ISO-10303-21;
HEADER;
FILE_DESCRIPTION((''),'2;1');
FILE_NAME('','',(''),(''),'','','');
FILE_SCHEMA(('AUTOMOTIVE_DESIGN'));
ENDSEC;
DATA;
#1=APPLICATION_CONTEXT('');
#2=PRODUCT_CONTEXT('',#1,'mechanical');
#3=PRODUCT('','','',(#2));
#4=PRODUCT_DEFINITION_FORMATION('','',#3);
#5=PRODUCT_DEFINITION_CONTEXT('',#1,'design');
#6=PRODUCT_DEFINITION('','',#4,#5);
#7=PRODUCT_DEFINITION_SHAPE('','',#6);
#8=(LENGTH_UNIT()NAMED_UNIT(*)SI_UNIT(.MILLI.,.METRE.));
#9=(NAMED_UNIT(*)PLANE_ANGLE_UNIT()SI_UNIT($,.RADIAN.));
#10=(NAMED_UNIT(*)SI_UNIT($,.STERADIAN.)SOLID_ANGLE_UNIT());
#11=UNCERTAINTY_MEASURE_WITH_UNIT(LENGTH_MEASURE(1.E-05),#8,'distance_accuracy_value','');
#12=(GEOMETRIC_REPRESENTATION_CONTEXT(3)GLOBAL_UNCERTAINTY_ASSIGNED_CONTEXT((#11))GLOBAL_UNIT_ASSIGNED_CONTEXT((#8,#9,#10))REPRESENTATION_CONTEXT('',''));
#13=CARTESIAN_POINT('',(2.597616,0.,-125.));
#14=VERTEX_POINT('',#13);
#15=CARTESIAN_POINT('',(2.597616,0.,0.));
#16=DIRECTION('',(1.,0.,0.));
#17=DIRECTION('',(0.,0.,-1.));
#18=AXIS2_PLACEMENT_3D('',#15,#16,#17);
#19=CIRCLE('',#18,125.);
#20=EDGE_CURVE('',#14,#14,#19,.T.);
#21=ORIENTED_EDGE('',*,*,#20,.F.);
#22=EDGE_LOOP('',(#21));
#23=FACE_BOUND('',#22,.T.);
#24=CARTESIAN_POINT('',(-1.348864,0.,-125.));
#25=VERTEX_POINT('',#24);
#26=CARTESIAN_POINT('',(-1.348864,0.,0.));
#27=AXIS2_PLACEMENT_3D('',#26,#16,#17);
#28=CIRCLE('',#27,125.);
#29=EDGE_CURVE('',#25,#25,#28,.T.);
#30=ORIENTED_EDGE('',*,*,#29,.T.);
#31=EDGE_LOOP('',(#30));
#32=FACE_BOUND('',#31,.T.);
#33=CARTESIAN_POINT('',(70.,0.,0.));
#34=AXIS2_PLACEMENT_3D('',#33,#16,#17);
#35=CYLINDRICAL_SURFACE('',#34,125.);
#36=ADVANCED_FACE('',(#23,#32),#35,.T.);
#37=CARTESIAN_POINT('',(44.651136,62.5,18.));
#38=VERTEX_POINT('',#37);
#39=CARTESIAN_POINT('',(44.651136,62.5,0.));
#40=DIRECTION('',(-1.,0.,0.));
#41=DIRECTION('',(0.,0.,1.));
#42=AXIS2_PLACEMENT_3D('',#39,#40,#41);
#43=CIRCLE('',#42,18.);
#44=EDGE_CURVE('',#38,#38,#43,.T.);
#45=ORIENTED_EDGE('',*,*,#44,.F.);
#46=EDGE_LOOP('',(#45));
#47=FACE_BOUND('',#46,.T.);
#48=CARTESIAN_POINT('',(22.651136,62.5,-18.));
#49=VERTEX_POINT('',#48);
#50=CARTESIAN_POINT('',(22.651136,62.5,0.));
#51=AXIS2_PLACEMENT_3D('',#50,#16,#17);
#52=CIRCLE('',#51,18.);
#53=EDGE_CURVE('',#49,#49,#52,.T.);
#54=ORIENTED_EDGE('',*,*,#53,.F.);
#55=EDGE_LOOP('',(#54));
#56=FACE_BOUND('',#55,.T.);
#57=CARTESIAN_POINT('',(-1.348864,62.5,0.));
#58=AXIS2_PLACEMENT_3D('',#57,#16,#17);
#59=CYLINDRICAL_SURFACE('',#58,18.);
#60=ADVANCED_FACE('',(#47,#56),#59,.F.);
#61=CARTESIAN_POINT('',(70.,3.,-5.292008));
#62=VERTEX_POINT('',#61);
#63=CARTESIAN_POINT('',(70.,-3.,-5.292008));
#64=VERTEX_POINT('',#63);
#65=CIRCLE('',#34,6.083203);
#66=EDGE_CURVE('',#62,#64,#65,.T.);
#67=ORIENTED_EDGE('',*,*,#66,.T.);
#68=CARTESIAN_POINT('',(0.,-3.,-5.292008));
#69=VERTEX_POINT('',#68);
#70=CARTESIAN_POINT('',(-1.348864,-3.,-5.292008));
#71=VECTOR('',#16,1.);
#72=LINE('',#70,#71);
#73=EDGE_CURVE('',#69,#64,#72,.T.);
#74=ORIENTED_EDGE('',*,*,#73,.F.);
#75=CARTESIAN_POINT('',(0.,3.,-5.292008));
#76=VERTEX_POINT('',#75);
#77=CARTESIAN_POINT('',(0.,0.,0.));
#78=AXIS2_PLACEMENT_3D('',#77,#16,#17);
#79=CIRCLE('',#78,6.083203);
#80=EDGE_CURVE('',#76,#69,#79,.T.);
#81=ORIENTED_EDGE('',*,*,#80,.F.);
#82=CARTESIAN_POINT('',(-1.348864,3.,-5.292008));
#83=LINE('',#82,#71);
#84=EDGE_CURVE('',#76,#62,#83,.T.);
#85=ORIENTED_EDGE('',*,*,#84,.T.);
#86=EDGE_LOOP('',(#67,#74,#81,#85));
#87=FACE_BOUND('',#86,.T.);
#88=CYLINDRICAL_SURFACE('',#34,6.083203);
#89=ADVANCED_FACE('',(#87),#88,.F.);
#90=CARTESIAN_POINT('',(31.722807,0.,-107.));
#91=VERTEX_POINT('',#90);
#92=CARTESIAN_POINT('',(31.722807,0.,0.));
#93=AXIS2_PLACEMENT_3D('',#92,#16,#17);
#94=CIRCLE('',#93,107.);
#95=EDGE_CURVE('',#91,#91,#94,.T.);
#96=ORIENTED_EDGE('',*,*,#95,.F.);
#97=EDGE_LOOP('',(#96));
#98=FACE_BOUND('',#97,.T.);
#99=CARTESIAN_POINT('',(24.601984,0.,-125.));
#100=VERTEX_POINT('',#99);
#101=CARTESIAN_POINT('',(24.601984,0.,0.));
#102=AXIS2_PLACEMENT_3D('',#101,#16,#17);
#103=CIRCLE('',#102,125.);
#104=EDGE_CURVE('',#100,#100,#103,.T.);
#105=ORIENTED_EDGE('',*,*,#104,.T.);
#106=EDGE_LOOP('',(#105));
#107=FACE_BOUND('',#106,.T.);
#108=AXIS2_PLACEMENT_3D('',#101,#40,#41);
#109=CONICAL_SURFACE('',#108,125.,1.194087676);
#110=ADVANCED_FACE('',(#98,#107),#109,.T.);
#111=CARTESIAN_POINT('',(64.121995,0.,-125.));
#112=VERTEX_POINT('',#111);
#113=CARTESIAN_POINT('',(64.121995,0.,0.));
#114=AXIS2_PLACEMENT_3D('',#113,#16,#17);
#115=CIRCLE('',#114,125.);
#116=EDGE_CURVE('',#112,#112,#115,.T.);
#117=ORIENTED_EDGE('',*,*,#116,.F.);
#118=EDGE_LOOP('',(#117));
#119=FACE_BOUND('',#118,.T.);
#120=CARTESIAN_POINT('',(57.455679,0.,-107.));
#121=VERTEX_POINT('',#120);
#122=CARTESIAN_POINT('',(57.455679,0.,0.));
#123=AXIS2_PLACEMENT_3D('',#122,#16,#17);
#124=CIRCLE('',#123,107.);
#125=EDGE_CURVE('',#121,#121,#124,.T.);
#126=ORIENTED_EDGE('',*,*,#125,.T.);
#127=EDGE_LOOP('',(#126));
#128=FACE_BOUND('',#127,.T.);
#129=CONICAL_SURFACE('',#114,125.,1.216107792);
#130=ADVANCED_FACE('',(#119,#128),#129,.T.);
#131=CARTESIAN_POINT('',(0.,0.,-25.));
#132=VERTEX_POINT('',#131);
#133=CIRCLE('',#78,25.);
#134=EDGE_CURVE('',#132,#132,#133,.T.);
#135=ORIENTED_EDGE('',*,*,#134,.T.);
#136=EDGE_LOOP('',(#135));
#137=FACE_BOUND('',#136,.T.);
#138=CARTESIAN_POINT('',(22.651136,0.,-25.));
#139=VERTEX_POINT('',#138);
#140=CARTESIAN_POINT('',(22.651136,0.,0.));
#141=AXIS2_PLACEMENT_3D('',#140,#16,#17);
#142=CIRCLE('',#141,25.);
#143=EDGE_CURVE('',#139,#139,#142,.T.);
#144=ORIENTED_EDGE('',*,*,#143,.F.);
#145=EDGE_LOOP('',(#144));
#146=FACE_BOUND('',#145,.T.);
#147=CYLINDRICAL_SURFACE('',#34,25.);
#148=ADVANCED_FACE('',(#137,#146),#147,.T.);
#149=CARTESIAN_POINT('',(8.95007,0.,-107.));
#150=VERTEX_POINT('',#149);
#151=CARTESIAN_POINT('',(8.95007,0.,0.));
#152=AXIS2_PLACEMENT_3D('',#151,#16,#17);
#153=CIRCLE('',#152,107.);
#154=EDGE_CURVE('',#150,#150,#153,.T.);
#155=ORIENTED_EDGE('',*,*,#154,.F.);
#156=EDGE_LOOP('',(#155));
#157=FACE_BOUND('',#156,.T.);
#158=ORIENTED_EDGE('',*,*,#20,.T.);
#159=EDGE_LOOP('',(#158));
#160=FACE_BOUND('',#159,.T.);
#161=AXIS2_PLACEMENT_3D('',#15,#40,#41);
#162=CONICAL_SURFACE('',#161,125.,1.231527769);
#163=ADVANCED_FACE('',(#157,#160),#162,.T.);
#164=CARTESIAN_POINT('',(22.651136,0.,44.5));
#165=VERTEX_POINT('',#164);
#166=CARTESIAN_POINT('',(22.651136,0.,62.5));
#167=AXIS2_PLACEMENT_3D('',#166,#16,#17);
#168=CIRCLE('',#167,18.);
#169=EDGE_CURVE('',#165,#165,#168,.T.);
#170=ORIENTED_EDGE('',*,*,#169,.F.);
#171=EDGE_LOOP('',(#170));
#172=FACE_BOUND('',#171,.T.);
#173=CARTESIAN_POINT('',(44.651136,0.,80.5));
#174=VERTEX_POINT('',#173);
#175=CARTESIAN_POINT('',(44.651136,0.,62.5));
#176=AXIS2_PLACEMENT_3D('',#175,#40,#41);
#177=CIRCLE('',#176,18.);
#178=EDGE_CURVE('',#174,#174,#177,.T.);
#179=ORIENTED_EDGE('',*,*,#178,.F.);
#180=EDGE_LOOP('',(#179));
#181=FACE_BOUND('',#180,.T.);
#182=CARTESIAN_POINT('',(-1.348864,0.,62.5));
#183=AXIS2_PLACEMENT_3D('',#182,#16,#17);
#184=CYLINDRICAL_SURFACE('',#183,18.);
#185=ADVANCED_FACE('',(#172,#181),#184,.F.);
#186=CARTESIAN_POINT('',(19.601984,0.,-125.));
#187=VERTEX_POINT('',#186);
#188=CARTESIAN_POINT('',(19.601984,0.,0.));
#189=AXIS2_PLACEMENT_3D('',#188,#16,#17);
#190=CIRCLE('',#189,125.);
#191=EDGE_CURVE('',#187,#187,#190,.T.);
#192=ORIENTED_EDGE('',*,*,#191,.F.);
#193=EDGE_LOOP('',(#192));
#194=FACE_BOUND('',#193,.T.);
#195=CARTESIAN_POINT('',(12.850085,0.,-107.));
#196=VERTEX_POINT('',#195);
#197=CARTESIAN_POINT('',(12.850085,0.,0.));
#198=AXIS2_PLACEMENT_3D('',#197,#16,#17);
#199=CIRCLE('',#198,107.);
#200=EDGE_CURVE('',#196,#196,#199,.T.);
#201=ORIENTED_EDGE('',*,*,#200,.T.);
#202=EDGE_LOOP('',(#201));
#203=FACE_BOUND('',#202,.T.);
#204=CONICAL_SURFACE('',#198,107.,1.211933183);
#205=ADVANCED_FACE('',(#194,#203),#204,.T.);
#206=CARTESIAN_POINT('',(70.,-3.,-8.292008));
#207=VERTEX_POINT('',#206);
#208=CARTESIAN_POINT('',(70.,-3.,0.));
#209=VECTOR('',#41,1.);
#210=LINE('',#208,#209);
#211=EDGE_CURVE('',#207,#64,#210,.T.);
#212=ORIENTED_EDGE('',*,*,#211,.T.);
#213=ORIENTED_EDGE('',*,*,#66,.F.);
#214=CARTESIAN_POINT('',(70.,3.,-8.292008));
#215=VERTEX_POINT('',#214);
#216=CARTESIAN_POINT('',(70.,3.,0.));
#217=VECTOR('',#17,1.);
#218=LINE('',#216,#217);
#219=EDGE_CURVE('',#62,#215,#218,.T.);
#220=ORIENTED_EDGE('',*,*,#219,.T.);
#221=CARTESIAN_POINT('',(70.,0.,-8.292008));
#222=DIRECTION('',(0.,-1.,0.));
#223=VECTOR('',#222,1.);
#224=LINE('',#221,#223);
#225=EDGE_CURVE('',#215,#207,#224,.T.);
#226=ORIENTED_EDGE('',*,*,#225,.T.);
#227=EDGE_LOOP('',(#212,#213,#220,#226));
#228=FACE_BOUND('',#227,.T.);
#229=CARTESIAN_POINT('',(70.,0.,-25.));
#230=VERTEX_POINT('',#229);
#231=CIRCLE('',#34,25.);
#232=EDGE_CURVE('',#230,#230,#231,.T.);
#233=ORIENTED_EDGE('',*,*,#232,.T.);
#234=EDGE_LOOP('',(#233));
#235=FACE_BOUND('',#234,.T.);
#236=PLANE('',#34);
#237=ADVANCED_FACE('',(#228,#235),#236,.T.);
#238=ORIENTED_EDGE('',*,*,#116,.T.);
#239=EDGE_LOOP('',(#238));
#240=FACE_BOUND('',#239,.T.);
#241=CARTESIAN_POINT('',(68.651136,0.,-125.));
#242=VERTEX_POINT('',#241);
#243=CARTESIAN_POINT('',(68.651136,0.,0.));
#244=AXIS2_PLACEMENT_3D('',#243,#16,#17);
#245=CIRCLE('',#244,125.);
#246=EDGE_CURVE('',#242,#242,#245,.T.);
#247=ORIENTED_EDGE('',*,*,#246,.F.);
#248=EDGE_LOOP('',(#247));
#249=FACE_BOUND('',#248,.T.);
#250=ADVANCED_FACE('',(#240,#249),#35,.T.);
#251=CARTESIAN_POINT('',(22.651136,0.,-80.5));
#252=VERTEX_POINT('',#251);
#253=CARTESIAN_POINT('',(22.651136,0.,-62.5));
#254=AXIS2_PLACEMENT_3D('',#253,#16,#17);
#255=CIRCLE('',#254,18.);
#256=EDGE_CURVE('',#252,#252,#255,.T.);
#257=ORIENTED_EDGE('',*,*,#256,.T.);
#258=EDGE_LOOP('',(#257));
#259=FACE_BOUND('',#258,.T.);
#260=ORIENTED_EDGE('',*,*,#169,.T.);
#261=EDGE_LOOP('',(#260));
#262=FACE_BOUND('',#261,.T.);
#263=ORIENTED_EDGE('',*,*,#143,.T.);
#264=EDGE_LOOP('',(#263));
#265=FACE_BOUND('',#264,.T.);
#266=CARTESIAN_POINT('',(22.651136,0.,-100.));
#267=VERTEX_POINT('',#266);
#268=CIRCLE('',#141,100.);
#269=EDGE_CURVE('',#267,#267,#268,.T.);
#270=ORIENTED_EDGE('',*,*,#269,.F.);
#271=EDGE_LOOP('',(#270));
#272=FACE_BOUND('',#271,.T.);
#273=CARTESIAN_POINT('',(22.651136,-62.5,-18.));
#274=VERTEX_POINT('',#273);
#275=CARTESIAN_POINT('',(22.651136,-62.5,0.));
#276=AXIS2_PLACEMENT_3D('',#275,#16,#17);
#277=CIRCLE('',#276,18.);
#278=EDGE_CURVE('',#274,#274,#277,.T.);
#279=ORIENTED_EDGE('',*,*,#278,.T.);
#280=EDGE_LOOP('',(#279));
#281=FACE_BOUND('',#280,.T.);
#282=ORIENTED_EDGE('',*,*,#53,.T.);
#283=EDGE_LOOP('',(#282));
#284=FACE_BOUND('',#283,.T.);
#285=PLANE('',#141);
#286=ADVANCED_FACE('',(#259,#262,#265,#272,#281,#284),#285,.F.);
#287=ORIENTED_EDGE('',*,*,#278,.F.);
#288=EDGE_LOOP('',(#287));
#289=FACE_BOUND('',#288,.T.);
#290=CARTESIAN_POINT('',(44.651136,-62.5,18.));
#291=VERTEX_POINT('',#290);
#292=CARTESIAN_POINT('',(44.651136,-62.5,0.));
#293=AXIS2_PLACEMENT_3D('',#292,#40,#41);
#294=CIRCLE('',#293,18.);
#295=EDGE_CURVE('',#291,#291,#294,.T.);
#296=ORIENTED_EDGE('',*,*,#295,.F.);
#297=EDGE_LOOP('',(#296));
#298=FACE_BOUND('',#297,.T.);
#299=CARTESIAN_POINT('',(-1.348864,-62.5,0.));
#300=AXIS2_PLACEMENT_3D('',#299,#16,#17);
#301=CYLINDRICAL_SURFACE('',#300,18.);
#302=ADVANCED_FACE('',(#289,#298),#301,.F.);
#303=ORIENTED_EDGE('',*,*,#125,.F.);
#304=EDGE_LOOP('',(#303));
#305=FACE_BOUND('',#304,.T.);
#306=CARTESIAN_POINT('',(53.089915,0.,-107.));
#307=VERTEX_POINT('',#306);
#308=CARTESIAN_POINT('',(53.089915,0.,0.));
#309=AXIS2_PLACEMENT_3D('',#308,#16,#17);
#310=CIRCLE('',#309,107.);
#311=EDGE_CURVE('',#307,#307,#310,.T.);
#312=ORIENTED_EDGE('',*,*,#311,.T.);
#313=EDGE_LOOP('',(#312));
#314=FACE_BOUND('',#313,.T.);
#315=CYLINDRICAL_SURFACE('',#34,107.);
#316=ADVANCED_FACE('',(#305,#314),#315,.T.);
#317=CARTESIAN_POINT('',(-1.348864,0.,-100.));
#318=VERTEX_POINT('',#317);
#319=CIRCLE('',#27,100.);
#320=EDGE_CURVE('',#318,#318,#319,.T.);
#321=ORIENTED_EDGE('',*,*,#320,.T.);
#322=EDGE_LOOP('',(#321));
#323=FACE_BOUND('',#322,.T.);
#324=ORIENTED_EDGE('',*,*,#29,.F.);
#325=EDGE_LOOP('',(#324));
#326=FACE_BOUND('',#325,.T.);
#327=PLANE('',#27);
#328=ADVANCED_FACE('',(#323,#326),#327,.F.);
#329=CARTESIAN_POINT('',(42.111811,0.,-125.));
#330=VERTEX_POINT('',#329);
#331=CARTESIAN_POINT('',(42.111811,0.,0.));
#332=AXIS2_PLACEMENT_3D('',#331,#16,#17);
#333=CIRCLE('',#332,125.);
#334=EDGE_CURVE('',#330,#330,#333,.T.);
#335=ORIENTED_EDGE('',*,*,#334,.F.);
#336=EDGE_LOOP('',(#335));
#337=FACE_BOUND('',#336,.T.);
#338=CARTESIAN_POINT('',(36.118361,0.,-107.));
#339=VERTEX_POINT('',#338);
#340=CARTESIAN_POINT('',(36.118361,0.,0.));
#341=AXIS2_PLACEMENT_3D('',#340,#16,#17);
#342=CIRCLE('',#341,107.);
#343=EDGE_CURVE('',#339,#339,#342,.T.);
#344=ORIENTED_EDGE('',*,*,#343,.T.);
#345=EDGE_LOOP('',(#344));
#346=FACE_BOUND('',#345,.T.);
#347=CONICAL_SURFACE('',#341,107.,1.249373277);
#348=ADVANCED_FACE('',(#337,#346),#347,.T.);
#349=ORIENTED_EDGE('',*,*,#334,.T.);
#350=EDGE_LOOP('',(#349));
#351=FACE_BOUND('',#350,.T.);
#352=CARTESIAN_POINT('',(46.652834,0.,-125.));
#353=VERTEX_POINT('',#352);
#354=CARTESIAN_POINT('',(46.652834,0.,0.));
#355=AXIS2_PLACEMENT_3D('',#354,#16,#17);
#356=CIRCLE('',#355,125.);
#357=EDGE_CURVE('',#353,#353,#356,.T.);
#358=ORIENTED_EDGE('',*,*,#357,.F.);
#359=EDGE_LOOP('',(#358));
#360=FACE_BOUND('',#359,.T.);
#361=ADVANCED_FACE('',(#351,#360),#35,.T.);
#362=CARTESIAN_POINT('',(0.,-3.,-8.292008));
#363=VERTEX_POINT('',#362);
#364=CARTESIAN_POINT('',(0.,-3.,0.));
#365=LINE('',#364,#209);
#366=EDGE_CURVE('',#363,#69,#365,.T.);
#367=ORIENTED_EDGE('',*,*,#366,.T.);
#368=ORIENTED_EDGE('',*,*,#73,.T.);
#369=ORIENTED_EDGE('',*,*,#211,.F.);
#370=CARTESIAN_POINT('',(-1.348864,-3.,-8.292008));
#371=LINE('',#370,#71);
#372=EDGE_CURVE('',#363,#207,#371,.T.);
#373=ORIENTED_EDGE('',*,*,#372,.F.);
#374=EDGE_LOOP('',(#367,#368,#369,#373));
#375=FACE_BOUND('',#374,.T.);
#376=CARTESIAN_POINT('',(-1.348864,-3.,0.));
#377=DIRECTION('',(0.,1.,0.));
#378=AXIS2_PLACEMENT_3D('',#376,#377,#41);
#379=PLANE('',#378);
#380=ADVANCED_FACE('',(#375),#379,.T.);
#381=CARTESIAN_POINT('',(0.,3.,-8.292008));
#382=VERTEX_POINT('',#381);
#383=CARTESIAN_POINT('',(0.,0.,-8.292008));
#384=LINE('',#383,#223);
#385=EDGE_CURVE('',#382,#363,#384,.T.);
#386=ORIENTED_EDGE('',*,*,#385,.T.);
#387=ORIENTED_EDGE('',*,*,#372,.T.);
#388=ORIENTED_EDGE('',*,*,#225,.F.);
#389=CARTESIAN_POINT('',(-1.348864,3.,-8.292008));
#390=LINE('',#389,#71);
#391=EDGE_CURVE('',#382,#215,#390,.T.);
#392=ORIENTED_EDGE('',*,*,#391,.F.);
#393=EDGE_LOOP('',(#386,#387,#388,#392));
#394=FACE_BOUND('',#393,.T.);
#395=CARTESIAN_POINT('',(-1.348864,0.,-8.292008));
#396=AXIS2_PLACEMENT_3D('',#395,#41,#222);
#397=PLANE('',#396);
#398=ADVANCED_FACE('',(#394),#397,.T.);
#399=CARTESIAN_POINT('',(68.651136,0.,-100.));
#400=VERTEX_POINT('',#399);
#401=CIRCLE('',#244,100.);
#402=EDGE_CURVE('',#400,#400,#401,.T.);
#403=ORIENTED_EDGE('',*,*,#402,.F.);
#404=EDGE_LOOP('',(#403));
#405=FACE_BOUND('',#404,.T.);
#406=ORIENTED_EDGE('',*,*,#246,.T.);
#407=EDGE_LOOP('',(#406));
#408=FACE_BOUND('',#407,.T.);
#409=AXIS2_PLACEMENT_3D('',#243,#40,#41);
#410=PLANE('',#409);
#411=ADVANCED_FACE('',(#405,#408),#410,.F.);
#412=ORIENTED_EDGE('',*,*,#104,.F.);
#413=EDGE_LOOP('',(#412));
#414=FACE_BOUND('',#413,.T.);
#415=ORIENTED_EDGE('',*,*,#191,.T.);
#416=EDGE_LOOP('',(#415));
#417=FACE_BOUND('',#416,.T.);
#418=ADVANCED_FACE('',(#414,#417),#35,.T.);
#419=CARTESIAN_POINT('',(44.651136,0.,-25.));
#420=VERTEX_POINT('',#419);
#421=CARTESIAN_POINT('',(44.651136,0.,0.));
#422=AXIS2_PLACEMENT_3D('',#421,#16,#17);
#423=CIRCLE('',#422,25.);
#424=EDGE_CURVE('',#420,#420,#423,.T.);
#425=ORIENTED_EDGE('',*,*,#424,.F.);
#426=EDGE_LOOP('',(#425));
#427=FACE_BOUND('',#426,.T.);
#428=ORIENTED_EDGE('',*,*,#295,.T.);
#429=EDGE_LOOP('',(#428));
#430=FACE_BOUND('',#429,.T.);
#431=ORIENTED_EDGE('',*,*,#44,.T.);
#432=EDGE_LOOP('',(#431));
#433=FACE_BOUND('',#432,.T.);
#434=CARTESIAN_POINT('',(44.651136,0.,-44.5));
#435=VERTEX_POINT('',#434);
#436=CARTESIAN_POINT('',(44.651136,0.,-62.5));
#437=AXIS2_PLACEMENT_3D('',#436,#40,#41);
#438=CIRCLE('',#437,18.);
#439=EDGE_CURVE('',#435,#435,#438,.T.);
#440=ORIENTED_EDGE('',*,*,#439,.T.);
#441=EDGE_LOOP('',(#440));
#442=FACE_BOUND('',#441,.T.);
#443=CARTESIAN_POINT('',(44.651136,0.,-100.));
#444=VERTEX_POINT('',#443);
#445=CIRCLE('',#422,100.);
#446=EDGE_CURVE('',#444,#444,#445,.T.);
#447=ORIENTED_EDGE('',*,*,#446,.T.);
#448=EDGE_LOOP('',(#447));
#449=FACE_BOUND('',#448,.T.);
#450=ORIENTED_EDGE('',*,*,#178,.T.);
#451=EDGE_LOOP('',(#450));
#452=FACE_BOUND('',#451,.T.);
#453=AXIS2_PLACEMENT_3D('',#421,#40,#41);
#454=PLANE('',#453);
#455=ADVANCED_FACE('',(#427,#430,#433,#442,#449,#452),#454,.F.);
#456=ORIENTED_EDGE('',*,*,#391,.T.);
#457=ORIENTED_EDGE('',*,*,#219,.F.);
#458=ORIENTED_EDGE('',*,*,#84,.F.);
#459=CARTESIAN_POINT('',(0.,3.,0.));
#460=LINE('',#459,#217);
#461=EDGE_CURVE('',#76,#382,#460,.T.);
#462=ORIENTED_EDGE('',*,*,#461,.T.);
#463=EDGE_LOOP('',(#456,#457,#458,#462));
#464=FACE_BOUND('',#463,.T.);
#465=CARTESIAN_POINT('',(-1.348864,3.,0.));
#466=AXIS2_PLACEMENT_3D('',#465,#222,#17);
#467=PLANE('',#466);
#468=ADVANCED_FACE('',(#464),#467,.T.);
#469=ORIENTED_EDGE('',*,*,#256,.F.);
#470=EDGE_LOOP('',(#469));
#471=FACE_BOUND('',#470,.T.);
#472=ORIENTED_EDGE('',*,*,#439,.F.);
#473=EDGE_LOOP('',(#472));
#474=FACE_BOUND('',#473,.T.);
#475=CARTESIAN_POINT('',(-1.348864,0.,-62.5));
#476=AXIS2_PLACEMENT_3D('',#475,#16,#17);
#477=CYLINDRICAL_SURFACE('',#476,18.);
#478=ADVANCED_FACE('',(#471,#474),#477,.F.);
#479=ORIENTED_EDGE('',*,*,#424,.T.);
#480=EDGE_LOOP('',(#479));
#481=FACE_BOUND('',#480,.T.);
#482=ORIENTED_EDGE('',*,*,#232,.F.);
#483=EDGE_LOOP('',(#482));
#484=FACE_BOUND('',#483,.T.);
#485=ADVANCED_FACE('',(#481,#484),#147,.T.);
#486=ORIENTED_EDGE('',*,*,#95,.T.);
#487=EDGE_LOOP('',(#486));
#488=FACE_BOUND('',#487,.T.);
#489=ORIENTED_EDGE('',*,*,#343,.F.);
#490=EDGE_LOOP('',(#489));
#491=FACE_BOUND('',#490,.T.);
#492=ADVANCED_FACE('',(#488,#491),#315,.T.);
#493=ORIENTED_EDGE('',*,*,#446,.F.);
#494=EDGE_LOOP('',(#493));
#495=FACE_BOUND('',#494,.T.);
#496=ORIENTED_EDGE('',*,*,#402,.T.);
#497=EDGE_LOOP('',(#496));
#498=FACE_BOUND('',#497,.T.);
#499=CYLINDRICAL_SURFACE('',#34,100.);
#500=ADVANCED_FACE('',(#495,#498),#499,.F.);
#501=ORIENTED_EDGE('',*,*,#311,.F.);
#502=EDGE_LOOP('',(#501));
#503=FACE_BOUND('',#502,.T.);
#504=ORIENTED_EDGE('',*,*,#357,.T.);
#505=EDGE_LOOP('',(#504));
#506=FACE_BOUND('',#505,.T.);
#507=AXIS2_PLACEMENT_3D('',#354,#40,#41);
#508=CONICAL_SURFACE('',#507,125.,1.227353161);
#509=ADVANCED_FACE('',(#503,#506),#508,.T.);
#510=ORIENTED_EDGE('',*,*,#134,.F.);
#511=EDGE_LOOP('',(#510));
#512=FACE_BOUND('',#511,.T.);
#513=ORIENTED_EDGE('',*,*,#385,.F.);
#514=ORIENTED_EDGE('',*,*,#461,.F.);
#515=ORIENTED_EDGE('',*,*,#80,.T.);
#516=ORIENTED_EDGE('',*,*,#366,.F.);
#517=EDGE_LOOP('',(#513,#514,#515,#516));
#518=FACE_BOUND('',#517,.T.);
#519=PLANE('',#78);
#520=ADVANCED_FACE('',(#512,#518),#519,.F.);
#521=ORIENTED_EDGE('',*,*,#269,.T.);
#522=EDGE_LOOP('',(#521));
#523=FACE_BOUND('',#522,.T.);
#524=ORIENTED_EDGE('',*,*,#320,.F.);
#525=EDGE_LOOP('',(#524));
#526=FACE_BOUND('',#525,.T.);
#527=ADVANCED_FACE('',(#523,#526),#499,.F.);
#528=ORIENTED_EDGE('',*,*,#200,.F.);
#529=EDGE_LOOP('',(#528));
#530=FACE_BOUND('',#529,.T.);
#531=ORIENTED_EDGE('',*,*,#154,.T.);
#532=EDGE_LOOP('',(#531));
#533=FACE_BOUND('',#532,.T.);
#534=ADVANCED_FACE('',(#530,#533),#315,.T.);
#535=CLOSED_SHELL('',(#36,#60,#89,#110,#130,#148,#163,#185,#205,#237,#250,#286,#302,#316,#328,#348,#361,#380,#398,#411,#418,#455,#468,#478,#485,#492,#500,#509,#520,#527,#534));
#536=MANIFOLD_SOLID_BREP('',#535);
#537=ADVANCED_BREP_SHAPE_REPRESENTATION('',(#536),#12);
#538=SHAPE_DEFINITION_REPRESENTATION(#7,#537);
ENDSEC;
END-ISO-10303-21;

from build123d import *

# Parameters (mm, degrees)
SKETCH4_R          = 18
CUT_EXTRUDE2_DEPTH = 191.632264763


with BuildPart() as part:
    # Sketch1 → Revolve2 (revolve)
    with BuildSketch(Plane(origin=(0, 0, 0), x_dir=(1, 0, 0), z_dir=(0, 1, 0))):
        Polygon((0, 6.083202512), (70, 6.083202512), (70, 25), (44.651136178, 25), (44.651136178, 100), (68.651136178, 100), (68.651136178, 125), (64.121995326, 125), (57.455679022, 107), (53.089915226, 107), (46.652833964, 125), (42.111811271, 125), (36.118360649, 107), (31.722806927, 107), (24.601983551, 125), (19.601983551, 125), (12.850084898, 107), (8.95007039, 107), (2.597616176, 125), (-1.348863822, 125), (-1.348863822, 100), (22.651136178, 100), (22.651136178, 25), (0, 25), align=None)
    revolve(axis=Axis((70, 0, 0), (-1, 0, 0)))

    # Sketch4 → Cut-Extrude2 (cut, through all)
    with BuildSketch(Plane(origin=(70, 0, 0), x_dir=(0, 0, -1), z_dir=(1, 0, 0))):
        with BuildLine():
            Line((5.29200839, -3), (8.29200839, -3))
            Line((8.29200839, -3), (8.29200839, 3))
            Line((8.29200839, 3), (5.29200839, 3))
            ThreePointArc((5.29200839, 3), (6.083202512, 0), (5.29200839, -3))
        make_face()
        with Locations((62.5, 0)):
            Circle(SKETCH4_R)
        with Locations((0, 62.5)):
            Circle(SKETCH4_R)
        with Locations((0, -62.5)):
            Circle(SKETCH4_R)
        with Locations((-62.5, 0)):
            Circle(SKETCH4_R)
    extrude(amount=-CUT_EXTRUDE2_DEPTH, mode=Mode.SUBTRACT)


solid = part.part
